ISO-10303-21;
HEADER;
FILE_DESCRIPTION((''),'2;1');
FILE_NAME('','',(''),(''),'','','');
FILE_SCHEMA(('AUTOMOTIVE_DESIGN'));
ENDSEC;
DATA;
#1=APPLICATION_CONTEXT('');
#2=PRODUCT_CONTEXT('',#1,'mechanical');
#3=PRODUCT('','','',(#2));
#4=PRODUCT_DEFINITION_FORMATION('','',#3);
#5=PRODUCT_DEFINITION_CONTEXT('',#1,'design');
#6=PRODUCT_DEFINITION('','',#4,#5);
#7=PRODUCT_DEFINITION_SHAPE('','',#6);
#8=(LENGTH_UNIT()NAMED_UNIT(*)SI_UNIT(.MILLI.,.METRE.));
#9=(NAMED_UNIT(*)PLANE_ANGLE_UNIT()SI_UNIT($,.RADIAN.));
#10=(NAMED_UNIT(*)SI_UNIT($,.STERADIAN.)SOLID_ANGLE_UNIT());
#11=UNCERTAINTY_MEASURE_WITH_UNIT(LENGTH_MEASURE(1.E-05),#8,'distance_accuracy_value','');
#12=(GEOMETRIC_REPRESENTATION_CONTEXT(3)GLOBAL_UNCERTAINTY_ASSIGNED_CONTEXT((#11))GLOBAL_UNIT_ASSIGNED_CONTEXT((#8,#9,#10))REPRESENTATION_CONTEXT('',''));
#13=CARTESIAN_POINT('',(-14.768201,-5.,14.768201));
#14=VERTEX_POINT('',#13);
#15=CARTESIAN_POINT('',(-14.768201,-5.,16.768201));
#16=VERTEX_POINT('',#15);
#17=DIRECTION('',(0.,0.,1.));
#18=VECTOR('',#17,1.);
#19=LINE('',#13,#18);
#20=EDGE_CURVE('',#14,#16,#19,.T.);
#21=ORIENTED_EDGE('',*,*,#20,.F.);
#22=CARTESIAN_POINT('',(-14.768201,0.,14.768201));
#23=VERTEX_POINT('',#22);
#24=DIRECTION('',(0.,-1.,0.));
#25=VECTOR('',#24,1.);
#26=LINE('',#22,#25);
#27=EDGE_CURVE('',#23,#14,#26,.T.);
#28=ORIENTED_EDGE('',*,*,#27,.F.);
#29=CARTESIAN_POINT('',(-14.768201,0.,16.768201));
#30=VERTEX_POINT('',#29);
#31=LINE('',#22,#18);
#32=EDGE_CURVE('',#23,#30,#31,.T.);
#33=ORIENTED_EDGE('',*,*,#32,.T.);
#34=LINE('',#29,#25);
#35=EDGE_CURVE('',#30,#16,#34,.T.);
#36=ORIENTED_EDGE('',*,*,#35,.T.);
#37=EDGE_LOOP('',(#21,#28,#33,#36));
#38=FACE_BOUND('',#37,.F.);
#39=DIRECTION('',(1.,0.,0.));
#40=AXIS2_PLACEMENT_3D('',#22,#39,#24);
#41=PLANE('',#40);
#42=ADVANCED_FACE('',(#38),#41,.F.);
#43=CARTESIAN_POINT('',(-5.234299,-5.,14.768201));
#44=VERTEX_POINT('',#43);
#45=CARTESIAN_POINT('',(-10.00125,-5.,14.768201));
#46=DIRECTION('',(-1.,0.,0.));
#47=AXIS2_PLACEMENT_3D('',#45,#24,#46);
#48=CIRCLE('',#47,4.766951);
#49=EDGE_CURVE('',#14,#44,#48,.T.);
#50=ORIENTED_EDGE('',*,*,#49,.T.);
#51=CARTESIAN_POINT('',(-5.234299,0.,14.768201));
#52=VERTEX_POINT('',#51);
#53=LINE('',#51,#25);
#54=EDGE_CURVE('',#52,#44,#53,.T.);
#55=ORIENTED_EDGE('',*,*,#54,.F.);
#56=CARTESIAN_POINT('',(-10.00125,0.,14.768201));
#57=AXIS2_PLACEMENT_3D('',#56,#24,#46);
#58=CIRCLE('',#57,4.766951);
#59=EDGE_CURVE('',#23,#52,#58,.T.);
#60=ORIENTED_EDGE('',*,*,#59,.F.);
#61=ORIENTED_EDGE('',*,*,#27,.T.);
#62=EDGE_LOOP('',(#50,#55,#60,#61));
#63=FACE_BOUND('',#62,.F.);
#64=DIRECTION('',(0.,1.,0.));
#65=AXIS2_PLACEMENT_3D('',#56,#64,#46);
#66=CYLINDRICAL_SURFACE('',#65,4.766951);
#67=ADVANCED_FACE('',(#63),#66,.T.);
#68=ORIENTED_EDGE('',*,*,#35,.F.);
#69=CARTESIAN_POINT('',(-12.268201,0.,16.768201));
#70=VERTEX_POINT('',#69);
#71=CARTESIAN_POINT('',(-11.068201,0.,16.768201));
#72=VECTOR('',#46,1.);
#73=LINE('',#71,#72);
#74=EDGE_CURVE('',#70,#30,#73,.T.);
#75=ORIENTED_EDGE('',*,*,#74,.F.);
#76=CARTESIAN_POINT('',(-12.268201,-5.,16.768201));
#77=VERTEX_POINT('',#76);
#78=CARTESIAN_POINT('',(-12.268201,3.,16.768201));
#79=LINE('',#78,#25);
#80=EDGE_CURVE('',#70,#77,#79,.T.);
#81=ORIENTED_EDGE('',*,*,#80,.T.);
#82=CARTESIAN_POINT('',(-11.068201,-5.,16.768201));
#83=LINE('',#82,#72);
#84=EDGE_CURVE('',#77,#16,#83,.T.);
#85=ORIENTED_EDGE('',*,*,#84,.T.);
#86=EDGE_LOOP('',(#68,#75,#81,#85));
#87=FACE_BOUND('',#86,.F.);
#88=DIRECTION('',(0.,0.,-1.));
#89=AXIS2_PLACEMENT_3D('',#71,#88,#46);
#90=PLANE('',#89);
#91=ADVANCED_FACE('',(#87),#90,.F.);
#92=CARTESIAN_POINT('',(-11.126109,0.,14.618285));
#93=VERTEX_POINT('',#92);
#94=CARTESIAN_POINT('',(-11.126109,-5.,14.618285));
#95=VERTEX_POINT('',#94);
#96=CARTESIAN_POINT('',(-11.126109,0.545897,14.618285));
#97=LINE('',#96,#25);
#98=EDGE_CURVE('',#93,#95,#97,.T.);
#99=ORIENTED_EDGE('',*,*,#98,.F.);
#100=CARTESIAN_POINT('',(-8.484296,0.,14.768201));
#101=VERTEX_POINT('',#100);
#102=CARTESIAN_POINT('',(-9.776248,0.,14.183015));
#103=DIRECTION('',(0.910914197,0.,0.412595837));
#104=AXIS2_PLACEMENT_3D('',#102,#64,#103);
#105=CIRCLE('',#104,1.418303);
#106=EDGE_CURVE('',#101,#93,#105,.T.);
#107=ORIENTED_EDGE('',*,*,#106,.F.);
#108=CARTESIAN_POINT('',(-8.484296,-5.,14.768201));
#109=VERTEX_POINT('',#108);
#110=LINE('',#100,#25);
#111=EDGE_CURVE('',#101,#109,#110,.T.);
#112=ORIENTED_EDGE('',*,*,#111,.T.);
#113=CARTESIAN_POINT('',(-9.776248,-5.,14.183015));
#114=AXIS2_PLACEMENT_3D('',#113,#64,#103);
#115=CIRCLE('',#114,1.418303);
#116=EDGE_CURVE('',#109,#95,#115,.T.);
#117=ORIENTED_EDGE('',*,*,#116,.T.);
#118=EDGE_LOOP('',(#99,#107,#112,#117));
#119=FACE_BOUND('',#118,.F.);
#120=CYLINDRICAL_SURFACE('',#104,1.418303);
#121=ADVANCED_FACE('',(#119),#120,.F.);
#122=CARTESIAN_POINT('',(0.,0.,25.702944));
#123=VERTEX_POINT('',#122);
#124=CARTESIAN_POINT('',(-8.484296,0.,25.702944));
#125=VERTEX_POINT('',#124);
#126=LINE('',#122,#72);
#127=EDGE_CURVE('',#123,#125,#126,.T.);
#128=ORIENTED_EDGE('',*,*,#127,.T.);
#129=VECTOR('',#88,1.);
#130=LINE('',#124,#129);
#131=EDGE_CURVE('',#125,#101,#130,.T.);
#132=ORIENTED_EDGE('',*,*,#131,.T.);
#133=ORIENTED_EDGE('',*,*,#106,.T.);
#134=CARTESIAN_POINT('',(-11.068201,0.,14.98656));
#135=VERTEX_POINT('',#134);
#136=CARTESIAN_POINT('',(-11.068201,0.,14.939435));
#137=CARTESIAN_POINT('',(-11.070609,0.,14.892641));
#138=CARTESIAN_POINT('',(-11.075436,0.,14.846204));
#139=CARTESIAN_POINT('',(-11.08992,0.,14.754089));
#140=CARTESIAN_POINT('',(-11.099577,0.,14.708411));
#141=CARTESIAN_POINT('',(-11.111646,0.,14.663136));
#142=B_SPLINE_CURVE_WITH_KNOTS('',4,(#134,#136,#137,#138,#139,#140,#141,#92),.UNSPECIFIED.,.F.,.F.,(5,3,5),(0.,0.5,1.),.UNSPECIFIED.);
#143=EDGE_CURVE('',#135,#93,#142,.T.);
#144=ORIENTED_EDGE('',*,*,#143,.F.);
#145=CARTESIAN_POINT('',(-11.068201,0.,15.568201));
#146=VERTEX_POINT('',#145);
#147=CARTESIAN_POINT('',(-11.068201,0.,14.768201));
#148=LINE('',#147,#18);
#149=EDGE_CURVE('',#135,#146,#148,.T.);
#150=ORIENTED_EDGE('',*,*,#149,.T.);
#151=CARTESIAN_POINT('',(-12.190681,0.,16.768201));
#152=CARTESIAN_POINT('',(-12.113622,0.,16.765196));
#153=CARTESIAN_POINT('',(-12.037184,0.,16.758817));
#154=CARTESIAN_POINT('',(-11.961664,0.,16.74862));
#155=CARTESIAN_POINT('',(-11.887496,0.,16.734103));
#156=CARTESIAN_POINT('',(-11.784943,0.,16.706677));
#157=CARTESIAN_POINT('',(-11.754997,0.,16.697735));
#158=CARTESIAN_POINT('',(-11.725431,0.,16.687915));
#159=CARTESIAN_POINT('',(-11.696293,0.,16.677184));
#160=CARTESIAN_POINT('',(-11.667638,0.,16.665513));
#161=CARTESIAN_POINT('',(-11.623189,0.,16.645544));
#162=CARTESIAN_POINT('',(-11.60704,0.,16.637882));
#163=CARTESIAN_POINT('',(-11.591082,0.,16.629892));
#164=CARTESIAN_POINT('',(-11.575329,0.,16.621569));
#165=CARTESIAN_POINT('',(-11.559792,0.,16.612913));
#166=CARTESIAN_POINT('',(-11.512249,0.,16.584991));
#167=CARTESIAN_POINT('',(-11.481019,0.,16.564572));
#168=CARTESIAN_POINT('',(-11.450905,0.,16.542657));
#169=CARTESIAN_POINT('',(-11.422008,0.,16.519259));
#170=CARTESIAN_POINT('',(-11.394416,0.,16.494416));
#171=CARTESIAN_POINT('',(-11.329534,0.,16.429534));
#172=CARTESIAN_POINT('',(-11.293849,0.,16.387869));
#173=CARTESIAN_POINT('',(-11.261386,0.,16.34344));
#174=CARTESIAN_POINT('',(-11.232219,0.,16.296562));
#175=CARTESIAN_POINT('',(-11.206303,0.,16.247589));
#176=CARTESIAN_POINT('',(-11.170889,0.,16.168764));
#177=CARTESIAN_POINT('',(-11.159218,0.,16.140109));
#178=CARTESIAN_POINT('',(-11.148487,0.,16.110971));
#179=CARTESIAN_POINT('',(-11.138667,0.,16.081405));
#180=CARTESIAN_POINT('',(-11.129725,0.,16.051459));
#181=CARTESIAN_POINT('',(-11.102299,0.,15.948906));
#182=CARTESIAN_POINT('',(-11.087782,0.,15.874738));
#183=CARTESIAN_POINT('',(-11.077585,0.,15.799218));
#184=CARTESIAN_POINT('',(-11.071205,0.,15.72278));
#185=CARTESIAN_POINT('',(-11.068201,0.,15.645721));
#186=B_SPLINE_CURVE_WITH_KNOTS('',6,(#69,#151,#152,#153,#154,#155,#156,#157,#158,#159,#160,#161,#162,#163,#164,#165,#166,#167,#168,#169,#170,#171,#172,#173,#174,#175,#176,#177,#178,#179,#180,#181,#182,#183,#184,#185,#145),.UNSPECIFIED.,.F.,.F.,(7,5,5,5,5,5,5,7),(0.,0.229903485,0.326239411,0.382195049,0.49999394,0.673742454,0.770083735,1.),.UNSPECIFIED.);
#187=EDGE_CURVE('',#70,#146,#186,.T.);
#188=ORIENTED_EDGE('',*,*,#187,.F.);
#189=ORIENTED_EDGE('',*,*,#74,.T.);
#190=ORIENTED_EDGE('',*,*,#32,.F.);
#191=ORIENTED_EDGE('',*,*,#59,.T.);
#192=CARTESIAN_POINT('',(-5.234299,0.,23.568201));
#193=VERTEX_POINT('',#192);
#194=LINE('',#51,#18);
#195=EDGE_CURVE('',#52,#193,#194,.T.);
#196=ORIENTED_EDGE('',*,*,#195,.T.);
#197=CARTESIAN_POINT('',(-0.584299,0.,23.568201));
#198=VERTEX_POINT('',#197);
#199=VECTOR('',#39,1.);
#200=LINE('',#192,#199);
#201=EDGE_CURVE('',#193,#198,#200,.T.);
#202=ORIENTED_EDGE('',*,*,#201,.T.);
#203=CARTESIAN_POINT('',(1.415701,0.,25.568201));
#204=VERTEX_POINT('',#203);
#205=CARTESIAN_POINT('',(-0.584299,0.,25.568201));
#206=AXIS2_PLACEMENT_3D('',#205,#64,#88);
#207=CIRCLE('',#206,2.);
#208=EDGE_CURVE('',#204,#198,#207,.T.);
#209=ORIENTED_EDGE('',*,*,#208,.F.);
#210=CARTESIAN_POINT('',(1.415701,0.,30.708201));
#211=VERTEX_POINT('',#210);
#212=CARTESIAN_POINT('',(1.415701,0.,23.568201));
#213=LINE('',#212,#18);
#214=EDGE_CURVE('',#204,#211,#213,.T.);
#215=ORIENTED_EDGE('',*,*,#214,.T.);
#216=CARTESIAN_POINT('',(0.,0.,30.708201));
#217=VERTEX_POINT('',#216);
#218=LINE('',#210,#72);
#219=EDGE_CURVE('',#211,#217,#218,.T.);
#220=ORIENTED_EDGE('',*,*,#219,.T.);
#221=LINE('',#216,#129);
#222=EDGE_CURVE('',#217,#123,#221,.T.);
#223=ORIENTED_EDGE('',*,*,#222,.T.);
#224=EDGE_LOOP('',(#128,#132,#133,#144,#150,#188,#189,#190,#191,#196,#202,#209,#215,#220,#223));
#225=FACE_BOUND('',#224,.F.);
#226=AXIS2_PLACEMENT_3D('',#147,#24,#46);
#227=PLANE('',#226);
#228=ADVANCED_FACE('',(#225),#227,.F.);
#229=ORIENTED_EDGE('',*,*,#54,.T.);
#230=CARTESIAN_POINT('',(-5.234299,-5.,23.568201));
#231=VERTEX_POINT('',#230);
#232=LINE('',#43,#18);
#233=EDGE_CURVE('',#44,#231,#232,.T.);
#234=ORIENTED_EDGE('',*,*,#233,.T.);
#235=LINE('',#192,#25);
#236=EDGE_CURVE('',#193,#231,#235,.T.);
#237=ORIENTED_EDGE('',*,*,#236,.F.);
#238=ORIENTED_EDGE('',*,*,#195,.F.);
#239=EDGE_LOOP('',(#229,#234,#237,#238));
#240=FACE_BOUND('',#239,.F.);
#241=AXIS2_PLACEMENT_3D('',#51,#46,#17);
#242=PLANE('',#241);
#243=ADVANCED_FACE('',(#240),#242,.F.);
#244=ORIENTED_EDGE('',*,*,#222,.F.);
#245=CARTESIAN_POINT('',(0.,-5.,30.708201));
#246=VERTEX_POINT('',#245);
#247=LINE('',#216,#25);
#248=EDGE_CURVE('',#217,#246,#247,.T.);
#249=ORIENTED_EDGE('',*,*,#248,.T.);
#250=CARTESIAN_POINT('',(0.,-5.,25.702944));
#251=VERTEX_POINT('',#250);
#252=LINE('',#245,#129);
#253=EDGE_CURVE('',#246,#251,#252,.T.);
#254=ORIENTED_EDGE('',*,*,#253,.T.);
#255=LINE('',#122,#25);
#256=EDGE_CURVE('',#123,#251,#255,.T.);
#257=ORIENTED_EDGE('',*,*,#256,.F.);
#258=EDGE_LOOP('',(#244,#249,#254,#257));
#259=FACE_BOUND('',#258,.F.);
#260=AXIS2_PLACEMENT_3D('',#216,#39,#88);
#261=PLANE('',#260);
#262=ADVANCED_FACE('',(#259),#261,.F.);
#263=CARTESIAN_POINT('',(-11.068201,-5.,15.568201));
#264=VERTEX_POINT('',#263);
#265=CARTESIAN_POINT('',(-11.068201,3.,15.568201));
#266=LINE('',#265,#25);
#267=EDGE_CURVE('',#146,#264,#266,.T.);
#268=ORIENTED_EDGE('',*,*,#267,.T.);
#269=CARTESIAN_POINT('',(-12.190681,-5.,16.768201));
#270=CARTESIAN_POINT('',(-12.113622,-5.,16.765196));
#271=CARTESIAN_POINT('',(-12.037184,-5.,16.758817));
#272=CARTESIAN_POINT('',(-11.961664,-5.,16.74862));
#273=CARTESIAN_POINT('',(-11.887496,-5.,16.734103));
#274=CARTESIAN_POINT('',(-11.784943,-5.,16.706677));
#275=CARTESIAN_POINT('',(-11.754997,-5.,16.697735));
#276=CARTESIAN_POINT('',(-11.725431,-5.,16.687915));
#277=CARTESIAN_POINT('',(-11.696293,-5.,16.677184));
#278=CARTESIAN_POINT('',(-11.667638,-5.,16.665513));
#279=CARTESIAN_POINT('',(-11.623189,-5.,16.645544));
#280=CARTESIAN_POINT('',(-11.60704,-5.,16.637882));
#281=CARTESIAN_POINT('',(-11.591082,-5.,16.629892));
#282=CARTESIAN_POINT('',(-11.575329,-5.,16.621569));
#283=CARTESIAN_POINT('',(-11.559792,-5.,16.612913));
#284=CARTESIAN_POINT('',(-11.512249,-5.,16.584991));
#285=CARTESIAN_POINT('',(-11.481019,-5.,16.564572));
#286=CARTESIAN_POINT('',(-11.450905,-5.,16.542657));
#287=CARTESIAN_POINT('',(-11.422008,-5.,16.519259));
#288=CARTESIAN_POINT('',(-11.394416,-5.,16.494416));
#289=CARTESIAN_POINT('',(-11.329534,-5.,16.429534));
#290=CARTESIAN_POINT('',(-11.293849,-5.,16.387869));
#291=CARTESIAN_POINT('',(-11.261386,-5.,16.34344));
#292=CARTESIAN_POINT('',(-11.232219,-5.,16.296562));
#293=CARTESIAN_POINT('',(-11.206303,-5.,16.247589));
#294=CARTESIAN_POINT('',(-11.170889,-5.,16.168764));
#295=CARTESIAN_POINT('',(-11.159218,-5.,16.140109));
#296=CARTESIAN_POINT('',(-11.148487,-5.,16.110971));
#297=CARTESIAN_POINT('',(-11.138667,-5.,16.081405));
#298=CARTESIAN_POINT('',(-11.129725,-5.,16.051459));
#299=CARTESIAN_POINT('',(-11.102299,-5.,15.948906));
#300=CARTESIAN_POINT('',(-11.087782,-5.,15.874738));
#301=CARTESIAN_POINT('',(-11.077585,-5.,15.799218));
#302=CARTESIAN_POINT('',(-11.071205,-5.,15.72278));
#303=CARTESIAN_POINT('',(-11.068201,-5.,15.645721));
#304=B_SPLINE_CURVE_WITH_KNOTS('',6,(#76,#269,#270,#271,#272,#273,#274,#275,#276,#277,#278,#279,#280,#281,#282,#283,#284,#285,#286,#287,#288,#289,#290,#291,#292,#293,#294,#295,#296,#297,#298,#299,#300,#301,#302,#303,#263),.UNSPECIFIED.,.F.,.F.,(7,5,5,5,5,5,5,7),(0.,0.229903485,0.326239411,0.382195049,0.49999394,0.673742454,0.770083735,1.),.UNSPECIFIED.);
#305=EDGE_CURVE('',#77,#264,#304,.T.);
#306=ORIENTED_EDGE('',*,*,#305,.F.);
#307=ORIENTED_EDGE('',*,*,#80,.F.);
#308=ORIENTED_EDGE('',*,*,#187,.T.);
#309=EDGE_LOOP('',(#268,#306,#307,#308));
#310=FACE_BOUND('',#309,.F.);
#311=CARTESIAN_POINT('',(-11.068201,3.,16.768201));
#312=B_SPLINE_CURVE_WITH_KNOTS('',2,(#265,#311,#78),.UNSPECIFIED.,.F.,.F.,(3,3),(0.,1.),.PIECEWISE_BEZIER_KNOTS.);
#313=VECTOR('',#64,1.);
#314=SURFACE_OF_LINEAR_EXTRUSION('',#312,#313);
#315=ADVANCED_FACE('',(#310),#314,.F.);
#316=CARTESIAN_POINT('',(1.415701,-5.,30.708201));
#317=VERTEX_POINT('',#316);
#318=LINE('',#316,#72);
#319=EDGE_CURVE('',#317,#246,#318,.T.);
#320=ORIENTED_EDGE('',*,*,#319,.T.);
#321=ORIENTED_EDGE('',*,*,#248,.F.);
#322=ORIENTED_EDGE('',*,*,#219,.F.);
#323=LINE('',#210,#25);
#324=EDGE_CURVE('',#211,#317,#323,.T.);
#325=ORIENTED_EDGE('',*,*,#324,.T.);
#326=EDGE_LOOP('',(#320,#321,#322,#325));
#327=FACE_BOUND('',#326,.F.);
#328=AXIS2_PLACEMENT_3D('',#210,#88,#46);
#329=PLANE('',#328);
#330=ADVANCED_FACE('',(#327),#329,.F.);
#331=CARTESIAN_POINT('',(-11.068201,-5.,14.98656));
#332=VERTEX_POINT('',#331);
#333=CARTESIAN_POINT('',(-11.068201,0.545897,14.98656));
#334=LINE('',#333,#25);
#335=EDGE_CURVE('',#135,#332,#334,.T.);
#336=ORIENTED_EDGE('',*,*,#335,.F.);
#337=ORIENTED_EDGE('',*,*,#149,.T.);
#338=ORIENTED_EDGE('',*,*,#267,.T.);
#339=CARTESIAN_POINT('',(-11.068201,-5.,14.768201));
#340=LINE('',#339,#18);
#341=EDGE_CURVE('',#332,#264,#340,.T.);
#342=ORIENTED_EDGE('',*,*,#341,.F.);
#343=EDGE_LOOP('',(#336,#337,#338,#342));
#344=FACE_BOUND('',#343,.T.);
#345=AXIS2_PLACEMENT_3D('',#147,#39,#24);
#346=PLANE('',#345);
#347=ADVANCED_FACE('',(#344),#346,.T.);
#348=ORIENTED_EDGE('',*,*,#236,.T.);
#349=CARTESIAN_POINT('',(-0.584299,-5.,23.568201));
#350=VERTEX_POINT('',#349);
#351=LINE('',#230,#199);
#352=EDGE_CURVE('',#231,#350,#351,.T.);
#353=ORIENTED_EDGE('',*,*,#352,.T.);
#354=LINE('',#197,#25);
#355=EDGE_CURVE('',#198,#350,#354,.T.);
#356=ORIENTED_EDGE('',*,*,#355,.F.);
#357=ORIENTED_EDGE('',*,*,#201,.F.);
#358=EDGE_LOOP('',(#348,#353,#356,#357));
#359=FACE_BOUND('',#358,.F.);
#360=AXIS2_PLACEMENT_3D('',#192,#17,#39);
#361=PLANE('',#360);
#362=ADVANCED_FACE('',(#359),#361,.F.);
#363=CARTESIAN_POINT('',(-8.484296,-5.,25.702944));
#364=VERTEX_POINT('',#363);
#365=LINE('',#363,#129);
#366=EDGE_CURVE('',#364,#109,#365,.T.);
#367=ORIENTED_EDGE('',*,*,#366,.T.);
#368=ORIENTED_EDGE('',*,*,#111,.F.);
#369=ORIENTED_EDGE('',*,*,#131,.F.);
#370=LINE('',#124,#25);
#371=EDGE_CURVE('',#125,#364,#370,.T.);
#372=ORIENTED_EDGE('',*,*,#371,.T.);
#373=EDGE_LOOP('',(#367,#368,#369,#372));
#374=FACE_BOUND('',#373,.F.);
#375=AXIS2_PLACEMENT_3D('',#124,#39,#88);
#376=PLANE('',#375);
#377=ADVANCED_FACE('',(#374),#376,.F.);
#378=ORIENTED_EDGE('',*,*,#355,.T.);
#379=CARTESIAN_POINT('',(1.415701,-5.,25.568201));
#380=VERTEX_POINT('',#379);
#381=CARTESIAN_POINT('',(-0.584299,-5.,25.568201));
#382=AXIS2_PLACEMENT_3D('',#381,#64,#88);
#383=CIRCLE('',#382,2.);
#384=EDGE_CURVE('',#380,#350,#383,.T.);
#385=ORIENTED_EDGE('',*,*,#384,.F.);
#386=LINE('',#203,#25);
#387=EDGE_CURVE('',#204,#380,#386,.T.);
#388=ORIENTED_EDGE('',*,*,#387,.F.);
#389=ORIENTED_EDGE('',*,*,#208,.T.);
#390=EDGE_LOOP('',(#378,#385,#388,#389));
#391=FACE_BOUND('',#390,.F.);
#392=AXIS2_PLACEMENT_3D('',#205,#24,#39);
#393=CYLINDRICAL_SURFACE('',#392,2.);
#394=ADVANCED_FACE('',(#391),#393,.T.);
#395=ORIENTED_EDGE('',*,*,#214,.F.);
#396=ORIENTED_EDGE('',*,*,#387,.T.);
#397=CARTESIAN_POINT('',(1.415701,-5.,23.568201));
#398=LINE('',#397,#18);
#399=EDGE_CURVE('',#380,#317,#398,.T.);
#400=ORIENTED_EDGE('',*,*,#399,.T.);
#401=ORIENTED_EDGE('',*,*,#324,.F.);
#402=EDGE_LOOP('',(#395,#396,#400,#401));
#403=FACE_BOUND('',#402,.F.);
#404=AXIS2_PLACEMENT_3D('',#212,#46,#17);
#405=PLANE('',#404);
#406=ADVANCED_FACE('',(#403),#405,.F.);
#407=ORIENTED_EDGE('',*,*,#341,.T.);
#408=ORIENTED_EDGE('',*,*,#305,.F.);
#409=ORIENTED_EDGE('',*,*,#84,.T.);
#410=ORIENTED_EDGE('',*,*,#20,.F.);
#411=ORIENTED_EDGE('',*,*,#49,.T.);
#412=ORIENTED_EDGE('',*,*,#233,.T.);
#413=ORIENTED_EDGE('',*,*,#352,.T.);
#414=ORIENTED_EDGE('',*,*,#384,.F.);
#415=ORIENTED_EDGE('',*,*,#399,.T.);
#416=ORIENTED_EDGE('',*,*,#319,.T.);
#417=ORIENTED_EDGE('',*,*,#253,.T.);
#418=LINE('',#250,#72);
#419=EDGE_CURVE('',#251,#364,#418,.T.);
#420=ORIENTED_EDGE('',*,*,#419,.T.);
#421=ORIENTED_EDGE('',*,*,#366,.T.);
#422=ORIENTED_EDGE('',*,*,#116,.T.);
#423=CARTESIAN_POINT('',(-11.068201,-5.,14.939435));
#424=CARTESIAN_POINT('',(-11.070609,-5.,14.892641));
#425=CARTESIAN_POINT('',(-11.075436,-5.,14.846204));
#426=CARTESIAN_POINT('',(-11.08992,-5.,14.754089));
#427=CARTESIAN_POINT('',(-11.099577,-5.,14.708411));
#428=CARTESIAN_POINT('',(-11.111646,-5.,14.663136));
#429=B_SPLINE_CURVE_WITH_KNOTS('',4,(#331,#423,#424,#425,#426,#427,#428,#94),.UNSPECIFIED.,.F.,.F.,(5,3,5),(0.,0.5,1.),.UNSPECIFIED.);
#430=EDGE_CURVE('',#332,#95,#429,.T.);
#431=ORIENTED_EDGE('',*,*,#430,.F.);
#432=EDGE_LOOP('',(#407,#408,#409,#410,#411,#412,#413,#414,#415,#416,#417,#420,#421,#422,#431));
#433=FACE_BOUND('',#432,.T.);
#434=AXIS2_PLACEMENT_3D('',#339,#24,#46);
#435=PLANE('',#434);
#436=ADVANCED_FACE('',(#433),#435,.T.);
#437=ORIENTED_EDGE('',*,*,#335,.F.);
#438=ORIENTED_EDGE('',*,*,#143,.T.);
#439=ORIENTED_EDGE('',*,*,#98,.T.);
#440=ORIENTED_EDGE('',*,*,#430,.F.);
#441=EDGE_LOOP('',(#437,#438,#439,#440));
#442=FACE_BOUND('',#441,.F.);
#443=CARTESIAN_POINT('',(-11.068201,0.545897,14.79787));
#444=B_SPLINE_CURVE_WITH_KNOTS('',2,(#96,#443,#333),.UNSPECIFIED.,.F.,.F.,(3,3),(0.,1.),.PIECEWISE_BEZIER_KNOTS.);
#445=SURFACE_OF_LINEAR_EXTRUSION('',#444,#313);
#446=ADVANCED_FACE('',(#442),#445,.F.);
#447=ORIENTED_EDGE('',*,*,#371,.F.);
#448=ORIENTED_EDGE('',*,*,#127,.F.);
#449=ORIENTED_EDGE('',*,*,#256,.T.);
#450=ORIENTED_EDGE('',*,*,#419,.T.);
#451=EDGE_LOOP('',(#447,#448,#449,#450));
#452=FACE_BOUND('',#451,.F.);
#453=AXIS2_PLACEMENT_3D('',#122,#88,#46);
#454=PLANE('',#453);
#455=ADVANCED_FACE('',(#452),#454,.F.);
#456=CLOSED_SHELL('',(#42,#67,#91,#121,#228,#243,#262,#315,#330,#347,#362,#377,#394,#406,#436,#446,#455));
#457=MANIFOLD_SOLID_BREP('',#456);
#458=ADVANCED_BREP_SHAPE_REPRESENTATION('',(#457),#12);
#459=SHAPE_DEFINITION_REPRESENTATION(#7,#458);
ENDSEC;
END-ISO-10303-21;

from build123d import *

# Parameters (mm, degrees)
F1_DEPTH    = 5
F2_R        = 2
F3_DEPTH    = 2
F4_T1_DEPTH = 11
F4_T3_DEPTH = 6.0917941426


# Not quite as in the source:
# - a fillet or chamfer that OpenCascade refuses, or shapes differently, is made with other operations: its cross-section is extruded or revolved along the edge and cut away or added


with BuildPart() as f1:
    # F0 (on Front) → F1 (new body)
    with BuildSketch(Plane.XZ):
        with BuildLine():
            Line((1.4157007724, 23.5682009265), (1.4157007724, 30.7082009265))
            Line((1.4157007724, 30.7082009265), (0, 30.7082009265))
            Line((0, 30.7082009265), (0, 29.0815811604))
            Line((0, 29.0815811604), (0, 25.7029440254))
            Line((0, 25.7029440254), (-8.4842955694, 25.7029440254))
            Line((-8.4842955694, 25.7029440254), (-8.4842955694, 14.7682009265))
            ThreePointArc((-8.4842955694, 14.7682009265), (-9.7762482479, 12.7647114857), (-11.0682009265, 14.7682009265))
            Line((-11.0682009265, 14.7682009265), (-14.7682009265, 14.7682009265))
            ThreePointArc((-14.7682009265, 14.7682009265), (-10.001250077, 10.001250077), (-5.2342992276, 14.7682009265))
            Line((-5.2342992276, 14.7682009265), (-5.2342992276, 23.5682009265))
            Line((-5.2342992276, 23.5682009265), (1.4157007724, 23.5682009265))
        make_face()
    extrude(amount=F1_DEPTH)

    # F2
    f2_edges = [f1.edges().sort_by_distance(p)[0] for p in [
        (1.415701, -2.5, 23.568201),
    ]]
    fillet(f2_edges, radius=F2_R)

    # F3 (add): a face of the model
    f3_faces = [f1.faces().sort_by_distance(p)[0] for p in [
        (-12.9182009265, -2.5, 14.7682009265),
    ]]
    extrude(f3_faces, amount=F3_DEPTH)

    # F4: fillet of radius 1.2 on 2 edges, made by hand

    # F4_s2 → F4_t1 (cut)
    with BuildSketch(Plane.XZ.offset(-3)):
        with BuildLine():
            add(Edge.make_bspline(
                [(-11.0682009265, 15.5682009265), (-11.0682009265, 16.7682009265), (-12.2682009265, 16.7682009265)],
                knots=[0, 0, 0, 1, 1, 1], degree=2, weights=[1, 1, 1]))
            Line((-12.2682009265, 16.7682009265), (-11.0682009265, 16.7682009265))
            Line((-11.0682009265, 16.7682009265), (-11.0682009265, 15.5682009265))
        make_face()
    extrude(amount=F4_T1_DEPTH, mode=Mode.SUBTRACT)

    # F4_s4 → F4_t3 (cut)
    with BuildSketch(Plane.XZ.offset(-0.5458970713)):
        with BuildLine():
            add(Edge.make_bspline(
                [(-11.1261089729, 14.6182854421), (-11.0682009265, 14.7978698213), (-11.0682009265, 14.986559755)],
                knots=[0, 0, 0, 1, 1, 1], degree=2, weights=[1, 1, 1]))
            Line((-11.0682009265, 14.986559755), (-11.0682009265, 14.7682009265))
            ThreePointArc((-11.0682009265, 14.7682009265), (-11.0992800608, 14.6940640537), (-11.1261089729, 14.6182854421))
        make_face()
    extrude(amount=F4_T3_DEPTH, mode=Mode.SUBTRACT)


solid = f1.part
